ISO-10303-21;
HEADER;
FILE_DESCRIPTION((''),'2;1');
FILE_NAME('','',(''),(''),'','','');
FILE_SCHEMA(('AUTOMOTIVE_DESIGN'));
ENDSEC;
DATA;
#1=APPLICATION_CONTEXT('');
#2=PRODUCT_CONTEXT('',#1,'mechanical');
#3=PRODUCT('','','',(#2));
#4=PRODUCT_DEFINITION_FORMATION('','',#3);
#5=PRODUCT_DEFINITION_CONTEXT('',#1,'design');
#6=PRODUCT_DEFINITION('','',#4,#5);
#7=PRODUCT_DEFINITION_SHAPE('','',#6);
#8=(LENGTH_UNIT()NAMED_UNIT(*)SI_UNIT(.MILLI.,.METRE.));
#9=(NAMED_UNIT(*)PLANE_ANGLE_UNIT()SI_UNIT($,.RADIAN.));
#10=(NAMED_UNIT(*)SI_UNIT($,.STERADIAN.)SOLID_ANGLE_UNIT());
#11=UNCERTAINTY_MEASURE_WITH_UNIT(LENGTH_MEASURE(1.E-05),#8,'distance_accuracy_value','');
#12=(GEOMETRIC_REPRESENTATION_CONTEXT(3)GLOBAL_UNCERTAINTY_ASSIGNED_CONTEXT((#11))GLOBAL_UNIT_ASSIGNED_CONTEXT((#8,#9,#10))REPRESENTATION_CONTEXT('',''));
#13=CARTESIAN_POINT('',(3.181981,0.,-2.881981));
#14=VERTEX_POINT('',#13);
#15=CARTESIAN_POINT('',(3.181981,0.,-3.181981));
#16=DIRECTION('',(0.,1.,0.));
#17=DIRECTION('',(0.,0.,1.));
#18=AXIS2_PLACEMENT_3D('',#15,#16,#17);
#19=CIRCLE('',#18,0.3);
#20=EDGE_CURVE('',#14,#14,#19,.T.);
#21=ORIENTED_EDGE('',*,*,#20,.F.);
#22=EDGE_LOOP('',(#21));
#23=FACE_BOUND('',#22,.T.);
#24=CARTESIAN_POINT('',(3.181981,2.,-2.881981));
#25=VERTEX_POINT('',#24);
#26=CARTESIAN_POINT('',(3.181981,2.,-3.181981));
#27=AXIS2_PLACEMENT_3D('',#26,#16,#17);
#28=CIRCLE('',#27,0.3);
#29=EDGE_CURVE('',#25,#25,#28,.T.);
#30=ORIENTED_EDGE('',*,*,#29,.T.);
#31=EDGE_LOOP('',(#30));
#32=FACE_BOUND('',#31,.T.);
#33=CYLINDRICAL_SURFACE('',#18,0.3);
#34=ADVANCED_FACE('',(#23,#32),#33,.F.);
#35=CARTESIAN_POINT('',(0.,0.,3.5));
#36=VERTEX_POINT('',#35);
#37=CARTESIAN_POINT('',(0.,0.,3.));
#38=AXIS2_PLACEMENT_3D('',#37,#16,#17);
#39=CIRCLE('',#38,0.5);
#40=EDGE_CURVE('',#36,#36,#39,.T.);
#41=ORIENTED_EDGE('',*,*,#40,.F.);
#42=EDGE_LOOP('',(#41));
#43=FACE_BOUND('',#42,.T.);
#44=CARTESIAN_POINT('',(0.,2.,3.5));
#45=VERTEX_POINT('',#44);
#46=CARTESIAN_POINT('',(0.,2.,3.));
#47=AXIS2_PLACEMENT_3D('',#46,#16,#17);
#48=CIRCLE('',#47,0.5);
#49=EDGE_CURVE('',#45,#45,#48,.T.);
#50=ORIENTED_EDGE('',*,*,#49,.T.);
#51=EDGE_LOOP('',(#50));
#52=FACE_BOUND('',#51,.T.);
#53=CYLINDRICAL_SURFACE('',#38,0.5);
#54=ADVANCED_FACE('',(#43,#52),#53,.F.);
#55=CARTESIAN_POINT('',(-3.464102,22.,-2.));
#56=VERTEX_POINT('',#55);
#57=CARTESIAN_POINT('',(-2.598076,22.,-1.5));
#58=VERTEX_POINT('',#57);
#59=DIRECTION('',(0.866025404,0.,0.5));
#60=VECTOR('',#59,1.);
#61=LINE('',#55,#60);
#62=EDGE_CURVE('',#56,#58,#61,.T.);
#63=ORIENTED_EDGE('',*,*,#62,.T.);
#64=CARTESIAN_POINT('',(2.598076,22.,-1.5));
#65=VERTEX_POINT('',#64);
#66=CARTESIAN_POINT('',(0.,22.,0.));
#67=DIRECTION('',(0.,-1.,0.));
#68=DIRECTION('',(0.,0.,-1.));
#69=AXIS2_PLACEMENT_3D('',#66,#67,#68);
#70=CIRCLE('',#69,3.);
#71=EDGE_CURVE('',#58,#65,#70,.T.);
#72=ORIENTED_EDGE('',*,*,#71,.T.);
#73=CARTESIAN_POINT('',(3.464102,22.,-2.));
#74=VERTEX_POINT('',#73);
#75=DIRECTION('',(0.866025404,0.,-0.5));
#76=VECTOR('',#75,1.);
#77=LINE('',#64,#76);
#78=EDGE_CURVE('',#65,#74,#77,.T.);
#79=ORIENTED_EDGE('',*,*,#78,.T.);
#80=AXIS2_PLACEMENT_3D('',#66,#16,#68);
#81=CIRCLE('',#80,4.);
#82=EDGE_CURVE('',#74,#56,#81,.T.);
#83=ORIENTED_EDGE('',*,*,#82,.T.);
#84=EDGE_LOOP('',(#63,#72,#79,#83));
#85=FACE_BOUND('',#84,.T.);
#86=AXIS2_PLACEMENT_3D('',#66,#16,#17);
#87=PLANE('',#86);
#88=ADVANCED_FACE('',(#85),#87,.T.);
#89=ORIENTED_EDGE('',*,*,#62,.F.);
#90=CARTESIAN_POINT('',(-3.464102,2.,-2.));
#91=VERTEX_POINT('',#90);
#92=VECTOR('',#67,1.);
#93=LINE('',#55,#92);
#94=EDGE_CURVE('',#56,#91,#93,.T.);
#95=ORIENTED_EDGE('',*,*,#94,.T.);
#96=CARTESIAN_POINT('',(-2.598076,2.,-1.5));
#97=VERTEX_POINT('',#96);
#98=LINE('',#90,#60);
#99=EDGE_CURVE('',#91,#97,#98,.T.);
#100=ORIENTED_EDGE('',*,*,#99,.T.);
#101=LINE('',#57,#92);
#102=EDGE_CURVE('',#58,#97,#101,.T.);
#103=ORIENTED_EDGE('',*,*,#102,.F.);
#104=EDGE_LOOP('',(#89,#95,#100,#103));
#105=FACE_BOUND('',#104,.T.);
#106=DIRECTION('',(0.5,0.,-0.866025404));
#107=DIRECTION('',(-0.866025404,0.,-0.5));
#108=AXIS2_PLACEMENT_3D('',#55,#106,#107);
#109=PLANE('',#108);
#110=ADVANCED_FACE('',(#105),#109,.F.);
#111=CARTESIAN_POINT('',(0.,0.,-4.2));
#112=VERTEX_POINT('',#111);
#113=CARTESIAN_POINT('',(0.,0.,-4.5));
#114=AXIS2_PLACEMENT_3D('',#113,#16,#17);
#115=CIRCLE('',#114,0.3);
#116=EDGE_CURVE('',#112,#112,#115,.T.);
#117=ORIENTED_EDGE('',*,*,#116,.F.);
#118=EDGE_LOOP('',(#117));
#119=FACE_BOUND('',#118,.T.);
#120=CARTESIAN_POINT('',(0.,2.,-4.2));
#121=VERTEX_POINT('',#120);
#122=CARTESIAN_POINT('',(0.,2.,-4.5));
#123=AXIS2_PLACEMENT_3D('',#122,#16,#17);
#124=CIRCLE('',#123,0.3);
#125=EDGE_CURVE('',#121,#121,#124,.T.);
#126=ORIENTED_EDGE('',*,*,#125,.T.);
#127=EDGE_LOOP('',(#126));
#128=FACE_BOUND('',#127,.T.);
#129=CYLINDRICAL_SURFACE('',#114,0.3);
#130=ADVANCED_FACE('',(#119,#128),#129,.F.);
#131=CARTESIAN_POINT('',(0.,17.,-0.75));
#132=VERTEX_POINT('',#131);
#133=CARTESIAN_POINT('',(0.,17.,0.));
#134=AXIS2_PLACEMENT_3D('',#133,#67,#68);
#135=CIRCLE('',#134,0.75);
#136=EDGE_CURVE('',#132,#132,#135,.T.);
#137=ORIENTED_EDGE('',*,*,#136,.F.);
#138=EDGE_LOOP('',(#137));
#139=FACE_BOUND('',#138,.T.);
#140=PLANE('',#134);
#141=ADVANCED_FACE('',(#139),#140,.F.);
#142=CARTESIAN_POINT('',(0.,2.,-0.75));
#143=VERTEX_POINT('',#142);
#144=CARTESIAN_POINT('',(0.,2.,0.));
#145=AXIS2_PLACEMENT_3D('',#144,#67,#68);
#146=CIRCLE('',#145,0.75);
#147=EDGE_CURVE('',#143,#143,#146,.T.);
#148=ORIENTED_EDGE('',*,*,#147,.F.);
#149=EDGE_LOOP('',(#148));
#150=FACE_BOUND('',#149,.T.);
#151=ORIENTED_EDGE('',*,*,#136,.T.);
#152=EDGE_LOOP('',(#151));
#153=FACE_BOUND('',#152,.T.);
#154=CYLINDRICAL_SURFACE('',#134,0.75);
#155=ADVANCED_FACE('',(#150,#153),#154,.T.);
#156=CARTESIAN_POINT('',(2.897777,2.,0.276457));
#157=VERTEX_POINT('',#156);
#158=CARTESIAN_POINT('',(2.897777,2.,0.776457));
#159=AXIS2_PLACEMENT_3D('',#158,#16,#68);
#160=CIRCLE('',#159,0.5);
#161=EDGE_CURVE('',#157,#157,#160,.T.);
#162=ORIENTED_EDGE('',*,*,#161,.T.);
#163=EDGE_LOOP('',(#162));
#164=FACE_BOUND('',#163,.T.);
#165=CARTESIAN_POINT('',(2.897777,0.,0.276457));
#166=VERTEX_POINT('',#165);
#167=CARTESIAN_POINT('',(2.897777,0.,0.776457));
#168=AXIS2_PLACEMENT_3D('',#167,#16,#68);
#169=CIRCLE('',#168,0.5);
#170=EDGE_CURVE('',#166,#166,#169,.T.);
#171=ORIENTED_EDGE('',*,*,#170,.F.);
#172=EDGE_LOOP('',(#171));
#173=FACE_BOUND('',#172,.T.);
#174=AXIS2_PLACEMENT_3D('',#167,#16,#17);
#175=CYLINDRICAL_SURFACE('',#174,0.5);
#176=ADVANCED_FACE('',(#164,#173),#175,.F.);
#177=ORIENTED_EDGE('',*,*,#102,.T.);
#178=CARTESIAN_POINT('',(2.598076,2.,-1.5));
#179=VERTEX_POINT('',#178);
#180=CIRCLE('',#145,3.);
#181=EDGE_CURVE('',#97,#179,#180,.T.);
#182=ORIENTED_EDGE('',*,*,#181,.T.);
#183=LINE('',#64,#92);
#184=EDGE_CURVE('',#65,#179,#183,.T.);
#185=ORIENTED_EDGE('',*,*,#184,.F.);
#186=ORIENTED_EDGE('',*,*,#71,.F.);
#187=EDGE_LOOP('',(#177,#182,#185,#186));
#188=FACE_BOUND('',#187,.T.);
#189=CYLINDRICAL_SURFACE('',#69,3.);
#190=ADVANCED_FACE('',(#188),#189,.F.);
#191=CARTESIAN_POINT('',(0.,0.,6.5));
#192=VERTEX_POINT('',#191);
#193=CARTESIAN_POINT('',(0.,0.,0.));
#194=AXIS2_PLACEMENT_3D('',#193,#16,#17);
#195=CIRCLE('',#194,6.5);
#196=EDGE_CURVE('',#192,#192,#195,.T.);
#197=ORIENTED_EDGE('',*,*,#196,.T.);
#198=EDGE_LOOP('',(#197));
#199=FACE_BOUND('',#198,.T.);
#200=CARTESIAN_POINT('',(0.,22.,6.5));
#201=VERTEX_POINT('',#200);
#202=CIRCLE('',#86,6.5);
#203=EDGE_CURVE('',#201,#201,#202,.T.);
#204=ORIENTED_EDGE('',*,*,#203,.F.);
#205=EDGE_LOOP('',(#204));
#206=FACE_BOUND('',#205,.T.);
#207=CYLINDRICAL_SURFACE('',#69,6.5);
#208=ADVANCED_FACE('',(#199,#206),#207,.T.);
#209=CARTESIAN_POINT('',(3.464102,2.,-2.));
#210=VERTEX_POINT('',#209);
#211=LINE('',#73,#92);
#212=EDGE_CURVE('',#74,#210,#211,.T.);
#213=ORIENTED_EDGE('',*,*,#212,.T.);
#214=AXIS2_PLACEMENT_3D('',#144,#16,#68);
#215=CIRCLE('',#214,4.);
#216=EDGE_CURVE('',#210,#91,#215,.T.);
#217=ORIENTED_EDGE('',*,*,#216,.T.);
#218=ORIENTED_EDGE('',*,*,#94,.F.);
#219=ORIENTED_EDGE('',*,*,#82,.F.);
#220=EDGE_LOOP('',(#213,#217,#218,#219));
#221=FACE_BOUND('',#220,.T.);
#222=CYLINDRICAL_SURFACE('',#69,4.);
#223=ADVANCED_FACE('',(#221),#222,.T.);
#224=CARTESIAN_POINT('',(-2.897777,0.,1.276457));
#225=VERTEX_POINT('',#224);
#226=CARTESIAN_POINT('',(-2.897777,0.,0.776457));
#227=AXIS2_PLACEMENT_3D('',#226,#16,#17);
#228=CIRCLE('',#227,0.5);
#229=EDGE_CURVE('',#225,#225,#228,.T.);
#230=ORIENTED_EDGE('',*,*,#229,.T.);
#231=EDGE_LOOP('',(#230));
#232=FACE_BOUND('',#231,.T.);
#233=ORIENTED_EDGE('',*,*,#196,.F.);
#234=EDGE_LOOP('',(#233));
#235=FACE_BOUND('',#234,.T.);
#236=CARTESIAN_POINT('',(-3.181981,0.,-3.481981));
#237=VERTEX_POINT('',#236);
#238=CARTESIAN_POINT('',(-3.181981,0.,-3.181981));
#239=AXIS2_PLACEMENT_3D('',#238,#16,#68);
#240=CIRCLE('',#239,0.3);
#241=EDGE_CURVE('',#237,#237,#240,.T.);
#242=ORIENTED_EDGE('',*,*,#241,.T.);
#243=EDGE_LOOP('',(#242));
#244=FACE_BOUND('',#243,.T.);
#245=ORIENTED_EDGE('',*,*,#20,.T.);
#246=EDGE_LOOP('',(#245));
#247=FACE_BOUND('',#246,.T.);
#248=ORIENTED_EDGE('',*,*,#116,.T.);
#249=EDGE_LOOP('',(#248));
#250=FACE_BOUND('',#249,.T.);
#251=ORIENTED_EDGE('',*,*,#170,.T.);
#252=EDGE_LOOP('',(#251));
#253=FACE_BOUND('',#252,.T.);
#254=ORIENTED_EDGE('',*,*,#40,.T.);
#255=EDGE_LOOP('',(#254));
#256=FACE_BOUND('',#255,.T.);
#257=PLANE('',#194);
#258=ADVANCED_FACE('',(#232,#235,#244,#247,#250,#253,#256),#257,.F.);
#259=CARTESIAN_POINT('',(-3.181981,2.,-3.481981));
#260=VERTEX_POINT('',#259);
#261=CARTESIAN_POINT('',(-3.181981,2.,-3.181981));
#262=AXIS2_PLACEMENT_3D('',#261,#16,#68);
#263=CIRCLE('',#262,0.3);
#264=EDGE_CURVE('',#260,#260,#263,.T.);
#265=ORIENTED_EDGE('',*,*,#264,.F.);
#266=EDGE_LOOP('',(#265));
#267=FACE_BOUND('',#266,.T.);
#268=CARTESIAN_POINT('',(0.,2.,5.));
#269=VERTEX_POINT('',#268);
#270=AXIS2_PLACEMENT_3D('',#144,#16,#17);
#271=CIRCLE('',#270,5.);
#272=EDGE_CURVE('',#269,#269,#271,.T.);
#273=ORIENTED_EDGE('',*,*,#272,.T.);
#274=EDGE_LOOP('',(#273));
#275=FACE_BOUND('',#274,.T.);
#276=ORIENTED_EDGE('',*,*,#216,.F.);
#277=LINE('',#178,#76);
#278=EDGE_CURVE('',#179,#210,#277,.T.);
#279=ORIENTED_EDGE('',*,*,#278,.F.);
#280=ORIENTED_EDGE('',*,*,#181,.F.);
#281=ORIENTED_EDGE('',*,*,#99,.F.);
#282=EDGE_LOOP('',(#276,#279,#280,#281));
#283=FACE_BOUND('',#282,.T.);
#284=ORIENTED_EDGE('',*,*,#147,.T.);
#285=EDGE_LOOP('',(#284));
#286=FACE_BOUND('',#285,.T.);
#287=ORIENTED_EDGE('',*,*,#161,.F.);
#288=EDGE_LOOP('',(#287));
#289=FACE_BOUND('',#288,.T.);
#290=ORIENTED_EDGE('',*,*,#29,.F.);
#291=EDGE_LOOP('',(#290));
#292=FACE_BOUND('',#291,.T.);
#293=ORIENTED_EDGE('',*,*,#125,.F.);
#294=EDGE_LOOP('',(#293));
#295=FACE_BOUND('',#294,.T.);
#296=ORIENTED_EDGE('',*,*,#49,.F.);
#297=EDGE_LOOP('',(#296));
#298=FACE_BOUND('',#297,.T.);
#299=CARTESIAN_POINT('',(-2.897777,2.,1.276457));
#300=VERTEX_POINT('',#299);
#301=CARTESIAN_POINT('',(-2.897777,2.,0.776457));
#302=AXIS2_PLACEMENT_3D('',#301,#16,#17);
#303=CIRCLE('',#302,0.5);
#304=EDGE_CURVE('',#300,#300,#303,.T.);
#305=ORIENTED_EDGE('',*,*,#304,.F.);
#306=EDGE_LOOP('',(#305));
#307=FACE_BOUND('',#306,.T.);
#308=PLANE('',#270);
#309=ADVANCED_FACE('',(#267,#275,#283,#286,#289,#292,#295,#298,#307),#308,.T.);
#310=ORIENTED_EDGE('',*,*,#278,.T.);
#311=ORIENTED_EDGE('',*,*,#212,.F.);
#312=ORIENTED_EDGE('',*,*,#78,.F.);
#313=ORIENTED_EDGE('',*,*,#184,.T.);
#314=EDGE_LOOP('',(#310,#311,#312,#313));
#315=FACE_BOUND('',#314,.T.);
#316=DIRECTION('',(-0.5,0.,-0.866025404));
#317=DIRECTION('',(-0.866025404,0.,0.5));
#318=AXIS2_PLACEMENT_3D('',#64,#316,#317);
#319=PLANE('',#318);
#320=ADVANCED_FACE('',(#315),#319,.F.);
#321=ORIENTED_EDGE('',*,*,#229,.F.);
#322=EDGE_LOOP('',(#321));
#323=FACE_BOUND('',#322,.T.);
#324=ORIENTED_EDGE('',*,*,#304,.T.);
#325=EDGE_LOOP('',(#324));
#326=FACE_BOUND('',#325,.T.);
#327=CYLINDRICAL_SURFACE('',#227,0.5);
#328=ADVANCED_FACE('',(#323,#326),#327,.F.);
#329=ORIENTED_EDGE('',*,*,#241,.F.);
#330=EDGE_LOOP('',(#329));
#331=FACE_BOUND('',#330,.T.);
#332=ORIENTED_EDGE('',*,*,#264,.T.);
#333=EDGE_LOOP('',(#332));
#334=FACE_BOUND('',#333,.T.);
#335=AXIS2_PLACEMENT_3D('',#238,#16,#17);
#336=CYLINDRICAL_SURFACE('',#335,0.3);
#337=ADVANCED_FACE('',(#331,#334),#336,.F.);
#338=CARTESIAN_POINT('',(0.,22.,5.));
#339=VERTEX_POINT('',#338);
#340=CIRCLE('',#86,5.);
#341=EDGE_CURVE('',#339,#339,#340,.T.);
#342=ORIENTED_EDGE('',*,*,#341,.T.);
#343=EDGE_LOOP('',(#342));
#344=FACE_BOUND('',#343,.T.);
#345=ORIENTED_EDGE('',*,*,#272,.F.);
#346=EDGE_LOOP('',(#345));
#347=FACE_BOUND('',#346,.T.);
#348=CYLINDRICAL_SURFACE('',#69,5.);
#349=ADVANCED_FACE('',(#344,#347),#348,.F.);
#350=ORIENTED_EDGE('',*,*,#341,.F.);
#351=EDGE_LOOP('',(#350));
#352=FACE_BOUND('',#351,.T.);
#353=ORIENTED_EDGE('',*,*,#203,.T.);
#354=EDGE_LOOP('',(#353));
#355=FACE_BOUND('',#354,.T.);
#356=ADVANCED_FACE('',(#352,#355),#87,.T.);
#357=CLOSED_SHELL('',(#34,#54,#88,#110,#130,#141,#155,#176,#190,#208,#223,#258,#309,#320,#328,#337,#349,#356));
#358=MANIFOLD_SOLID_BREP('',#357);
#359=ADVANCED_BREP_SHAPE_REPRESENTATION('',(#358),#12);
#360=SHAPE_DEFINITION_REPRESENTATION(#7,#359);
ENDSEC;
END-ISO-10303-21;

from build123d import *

# Parameters (mm, degrees)
SKETCH1_R           = 6.5
BOSS_EXTRUDE1_DEPTH = 22
CAVITY1_START       = 2
CAVITY1_OUTLINE_R   = 5
CAVITY1_OUTLINE_R_2 = 0.75
CAVITY1_DEPTH       = 20
CAVITY1_START_2     = 17
CAVITY1_2_OUTLINE_R = 0.75
CAVITY1_2_DEPTH     = 5
SKETCH2_R           = 0.5
CUT_EXTRUDE1_DEPTH  = 23.011360703
SKETCH3_R           = 0.3
CUT_EXTRUDE2_DEPTH  = 23.011360703


# Read off the part's stored shape, not the designer's step: Cavity1
with BuildPart() as part:
    # Sketch1 → Boss-Extrude1 (new body)
    with BuildSketch(Plane(origin=(0, 0, 0), x_dir=(1, 0, 0), z_dir=(0, 1, 0))):
        with Locations(Location((0, 0, 0), (0, 0, 270))):
            Circle(SKETCH1_R)
    extrude(amount=BOSS_EXTRUDE1_DEPTH)

    # Cavity1 outline → Cavity1 (cut)
    with BuildSketch(Plane(origin=(0, 0, 0), x_dir=(1, 0, 0), z_dir=(0, 1, 0)).offset(CAVITY1_START)):
        Circle(CAVITY1_OUTLINE_R)
        Circle(CAVITY1_OUTLINE_R_2, mode=Mode.SUBTRACT)
        with BuildLine():
            ThreePointArc((2.598076211, 1.5), (0, 3), (-2.598076211, 1.5))
            Line((-2.598076211, 1.5), (-3.464101615, 2))
            ThreePointArc((-3.464101615, 2), (0, 4), (3.464101615, 2))
            Line((3.464101615, 2), (2.598076211, 1.5))
        make_face(mode=Mode.SUBTRACT)
    extrude(amount=CAVITY1_DEPTH, mode=Mode.SUBTRACT)

    # Cavity1 2 outline → Cavity1 2 (cut)
    with BuildSketch(Plane(origin=(0, 0, 0), x_dir=(1, 0, 0), z_dir=(0, 1, 0)).offset(CAVITY1_START_2)):
        Circle(CAVITY1_2_OUTLINE_R)
    extrude(amount=CAVITY1_2_DEPTH, mode=Mode.SUBTRACT)

    # Sketch2 → Cut-Extrude1 (cut, through all)
    with BuildSketch(Plane(origin=(0, 2, 0), x_dir=(1, 0, 0), z_dir=(0, 1, 0))):
        with Locations(Location((0, -3, 0), (0, 0, 270))):
            Circle(SKETCH2_R)
        with Locations(Location((-2.897777479, -0.776457135, 0), (0, 0, 270))):
            Circle(SKETCH2_R)
        with Locations(Location((2.897777479, -0.776457135, 0), (0, 0, 90))):
            Circle(SKETCH2_R)
    extrude(amount=-CUT_EXTRUDE1_DEPTH, mode=Mode.SUBTRACT)

    # Sketch3 → Cut-Extrude2 (cut, through all)
    with BuildSketch(Plane(origin=(0, 2, 0), x_dir=(1, 0, 0), z_dir=(0, 1, 0))):
        with Locations(Location((0, 4.5, 0), (0, 0, 270))):
            Circle(SKETCH3_R)
        with Locations(Location((3.181980515, 3.181980515, 0), (0, 0, 270))):
            Circle(SKETCH3_R)
        with Locations(Location((-3.181980515, 3.181980515, 0), (0, 0, 90))):
            Circle(SKETCH3_R)
    extrude(amount=-CUT_EXTRUDE2_DEPTH, mode=Mode.SUBTRACT)


solid = part.part
